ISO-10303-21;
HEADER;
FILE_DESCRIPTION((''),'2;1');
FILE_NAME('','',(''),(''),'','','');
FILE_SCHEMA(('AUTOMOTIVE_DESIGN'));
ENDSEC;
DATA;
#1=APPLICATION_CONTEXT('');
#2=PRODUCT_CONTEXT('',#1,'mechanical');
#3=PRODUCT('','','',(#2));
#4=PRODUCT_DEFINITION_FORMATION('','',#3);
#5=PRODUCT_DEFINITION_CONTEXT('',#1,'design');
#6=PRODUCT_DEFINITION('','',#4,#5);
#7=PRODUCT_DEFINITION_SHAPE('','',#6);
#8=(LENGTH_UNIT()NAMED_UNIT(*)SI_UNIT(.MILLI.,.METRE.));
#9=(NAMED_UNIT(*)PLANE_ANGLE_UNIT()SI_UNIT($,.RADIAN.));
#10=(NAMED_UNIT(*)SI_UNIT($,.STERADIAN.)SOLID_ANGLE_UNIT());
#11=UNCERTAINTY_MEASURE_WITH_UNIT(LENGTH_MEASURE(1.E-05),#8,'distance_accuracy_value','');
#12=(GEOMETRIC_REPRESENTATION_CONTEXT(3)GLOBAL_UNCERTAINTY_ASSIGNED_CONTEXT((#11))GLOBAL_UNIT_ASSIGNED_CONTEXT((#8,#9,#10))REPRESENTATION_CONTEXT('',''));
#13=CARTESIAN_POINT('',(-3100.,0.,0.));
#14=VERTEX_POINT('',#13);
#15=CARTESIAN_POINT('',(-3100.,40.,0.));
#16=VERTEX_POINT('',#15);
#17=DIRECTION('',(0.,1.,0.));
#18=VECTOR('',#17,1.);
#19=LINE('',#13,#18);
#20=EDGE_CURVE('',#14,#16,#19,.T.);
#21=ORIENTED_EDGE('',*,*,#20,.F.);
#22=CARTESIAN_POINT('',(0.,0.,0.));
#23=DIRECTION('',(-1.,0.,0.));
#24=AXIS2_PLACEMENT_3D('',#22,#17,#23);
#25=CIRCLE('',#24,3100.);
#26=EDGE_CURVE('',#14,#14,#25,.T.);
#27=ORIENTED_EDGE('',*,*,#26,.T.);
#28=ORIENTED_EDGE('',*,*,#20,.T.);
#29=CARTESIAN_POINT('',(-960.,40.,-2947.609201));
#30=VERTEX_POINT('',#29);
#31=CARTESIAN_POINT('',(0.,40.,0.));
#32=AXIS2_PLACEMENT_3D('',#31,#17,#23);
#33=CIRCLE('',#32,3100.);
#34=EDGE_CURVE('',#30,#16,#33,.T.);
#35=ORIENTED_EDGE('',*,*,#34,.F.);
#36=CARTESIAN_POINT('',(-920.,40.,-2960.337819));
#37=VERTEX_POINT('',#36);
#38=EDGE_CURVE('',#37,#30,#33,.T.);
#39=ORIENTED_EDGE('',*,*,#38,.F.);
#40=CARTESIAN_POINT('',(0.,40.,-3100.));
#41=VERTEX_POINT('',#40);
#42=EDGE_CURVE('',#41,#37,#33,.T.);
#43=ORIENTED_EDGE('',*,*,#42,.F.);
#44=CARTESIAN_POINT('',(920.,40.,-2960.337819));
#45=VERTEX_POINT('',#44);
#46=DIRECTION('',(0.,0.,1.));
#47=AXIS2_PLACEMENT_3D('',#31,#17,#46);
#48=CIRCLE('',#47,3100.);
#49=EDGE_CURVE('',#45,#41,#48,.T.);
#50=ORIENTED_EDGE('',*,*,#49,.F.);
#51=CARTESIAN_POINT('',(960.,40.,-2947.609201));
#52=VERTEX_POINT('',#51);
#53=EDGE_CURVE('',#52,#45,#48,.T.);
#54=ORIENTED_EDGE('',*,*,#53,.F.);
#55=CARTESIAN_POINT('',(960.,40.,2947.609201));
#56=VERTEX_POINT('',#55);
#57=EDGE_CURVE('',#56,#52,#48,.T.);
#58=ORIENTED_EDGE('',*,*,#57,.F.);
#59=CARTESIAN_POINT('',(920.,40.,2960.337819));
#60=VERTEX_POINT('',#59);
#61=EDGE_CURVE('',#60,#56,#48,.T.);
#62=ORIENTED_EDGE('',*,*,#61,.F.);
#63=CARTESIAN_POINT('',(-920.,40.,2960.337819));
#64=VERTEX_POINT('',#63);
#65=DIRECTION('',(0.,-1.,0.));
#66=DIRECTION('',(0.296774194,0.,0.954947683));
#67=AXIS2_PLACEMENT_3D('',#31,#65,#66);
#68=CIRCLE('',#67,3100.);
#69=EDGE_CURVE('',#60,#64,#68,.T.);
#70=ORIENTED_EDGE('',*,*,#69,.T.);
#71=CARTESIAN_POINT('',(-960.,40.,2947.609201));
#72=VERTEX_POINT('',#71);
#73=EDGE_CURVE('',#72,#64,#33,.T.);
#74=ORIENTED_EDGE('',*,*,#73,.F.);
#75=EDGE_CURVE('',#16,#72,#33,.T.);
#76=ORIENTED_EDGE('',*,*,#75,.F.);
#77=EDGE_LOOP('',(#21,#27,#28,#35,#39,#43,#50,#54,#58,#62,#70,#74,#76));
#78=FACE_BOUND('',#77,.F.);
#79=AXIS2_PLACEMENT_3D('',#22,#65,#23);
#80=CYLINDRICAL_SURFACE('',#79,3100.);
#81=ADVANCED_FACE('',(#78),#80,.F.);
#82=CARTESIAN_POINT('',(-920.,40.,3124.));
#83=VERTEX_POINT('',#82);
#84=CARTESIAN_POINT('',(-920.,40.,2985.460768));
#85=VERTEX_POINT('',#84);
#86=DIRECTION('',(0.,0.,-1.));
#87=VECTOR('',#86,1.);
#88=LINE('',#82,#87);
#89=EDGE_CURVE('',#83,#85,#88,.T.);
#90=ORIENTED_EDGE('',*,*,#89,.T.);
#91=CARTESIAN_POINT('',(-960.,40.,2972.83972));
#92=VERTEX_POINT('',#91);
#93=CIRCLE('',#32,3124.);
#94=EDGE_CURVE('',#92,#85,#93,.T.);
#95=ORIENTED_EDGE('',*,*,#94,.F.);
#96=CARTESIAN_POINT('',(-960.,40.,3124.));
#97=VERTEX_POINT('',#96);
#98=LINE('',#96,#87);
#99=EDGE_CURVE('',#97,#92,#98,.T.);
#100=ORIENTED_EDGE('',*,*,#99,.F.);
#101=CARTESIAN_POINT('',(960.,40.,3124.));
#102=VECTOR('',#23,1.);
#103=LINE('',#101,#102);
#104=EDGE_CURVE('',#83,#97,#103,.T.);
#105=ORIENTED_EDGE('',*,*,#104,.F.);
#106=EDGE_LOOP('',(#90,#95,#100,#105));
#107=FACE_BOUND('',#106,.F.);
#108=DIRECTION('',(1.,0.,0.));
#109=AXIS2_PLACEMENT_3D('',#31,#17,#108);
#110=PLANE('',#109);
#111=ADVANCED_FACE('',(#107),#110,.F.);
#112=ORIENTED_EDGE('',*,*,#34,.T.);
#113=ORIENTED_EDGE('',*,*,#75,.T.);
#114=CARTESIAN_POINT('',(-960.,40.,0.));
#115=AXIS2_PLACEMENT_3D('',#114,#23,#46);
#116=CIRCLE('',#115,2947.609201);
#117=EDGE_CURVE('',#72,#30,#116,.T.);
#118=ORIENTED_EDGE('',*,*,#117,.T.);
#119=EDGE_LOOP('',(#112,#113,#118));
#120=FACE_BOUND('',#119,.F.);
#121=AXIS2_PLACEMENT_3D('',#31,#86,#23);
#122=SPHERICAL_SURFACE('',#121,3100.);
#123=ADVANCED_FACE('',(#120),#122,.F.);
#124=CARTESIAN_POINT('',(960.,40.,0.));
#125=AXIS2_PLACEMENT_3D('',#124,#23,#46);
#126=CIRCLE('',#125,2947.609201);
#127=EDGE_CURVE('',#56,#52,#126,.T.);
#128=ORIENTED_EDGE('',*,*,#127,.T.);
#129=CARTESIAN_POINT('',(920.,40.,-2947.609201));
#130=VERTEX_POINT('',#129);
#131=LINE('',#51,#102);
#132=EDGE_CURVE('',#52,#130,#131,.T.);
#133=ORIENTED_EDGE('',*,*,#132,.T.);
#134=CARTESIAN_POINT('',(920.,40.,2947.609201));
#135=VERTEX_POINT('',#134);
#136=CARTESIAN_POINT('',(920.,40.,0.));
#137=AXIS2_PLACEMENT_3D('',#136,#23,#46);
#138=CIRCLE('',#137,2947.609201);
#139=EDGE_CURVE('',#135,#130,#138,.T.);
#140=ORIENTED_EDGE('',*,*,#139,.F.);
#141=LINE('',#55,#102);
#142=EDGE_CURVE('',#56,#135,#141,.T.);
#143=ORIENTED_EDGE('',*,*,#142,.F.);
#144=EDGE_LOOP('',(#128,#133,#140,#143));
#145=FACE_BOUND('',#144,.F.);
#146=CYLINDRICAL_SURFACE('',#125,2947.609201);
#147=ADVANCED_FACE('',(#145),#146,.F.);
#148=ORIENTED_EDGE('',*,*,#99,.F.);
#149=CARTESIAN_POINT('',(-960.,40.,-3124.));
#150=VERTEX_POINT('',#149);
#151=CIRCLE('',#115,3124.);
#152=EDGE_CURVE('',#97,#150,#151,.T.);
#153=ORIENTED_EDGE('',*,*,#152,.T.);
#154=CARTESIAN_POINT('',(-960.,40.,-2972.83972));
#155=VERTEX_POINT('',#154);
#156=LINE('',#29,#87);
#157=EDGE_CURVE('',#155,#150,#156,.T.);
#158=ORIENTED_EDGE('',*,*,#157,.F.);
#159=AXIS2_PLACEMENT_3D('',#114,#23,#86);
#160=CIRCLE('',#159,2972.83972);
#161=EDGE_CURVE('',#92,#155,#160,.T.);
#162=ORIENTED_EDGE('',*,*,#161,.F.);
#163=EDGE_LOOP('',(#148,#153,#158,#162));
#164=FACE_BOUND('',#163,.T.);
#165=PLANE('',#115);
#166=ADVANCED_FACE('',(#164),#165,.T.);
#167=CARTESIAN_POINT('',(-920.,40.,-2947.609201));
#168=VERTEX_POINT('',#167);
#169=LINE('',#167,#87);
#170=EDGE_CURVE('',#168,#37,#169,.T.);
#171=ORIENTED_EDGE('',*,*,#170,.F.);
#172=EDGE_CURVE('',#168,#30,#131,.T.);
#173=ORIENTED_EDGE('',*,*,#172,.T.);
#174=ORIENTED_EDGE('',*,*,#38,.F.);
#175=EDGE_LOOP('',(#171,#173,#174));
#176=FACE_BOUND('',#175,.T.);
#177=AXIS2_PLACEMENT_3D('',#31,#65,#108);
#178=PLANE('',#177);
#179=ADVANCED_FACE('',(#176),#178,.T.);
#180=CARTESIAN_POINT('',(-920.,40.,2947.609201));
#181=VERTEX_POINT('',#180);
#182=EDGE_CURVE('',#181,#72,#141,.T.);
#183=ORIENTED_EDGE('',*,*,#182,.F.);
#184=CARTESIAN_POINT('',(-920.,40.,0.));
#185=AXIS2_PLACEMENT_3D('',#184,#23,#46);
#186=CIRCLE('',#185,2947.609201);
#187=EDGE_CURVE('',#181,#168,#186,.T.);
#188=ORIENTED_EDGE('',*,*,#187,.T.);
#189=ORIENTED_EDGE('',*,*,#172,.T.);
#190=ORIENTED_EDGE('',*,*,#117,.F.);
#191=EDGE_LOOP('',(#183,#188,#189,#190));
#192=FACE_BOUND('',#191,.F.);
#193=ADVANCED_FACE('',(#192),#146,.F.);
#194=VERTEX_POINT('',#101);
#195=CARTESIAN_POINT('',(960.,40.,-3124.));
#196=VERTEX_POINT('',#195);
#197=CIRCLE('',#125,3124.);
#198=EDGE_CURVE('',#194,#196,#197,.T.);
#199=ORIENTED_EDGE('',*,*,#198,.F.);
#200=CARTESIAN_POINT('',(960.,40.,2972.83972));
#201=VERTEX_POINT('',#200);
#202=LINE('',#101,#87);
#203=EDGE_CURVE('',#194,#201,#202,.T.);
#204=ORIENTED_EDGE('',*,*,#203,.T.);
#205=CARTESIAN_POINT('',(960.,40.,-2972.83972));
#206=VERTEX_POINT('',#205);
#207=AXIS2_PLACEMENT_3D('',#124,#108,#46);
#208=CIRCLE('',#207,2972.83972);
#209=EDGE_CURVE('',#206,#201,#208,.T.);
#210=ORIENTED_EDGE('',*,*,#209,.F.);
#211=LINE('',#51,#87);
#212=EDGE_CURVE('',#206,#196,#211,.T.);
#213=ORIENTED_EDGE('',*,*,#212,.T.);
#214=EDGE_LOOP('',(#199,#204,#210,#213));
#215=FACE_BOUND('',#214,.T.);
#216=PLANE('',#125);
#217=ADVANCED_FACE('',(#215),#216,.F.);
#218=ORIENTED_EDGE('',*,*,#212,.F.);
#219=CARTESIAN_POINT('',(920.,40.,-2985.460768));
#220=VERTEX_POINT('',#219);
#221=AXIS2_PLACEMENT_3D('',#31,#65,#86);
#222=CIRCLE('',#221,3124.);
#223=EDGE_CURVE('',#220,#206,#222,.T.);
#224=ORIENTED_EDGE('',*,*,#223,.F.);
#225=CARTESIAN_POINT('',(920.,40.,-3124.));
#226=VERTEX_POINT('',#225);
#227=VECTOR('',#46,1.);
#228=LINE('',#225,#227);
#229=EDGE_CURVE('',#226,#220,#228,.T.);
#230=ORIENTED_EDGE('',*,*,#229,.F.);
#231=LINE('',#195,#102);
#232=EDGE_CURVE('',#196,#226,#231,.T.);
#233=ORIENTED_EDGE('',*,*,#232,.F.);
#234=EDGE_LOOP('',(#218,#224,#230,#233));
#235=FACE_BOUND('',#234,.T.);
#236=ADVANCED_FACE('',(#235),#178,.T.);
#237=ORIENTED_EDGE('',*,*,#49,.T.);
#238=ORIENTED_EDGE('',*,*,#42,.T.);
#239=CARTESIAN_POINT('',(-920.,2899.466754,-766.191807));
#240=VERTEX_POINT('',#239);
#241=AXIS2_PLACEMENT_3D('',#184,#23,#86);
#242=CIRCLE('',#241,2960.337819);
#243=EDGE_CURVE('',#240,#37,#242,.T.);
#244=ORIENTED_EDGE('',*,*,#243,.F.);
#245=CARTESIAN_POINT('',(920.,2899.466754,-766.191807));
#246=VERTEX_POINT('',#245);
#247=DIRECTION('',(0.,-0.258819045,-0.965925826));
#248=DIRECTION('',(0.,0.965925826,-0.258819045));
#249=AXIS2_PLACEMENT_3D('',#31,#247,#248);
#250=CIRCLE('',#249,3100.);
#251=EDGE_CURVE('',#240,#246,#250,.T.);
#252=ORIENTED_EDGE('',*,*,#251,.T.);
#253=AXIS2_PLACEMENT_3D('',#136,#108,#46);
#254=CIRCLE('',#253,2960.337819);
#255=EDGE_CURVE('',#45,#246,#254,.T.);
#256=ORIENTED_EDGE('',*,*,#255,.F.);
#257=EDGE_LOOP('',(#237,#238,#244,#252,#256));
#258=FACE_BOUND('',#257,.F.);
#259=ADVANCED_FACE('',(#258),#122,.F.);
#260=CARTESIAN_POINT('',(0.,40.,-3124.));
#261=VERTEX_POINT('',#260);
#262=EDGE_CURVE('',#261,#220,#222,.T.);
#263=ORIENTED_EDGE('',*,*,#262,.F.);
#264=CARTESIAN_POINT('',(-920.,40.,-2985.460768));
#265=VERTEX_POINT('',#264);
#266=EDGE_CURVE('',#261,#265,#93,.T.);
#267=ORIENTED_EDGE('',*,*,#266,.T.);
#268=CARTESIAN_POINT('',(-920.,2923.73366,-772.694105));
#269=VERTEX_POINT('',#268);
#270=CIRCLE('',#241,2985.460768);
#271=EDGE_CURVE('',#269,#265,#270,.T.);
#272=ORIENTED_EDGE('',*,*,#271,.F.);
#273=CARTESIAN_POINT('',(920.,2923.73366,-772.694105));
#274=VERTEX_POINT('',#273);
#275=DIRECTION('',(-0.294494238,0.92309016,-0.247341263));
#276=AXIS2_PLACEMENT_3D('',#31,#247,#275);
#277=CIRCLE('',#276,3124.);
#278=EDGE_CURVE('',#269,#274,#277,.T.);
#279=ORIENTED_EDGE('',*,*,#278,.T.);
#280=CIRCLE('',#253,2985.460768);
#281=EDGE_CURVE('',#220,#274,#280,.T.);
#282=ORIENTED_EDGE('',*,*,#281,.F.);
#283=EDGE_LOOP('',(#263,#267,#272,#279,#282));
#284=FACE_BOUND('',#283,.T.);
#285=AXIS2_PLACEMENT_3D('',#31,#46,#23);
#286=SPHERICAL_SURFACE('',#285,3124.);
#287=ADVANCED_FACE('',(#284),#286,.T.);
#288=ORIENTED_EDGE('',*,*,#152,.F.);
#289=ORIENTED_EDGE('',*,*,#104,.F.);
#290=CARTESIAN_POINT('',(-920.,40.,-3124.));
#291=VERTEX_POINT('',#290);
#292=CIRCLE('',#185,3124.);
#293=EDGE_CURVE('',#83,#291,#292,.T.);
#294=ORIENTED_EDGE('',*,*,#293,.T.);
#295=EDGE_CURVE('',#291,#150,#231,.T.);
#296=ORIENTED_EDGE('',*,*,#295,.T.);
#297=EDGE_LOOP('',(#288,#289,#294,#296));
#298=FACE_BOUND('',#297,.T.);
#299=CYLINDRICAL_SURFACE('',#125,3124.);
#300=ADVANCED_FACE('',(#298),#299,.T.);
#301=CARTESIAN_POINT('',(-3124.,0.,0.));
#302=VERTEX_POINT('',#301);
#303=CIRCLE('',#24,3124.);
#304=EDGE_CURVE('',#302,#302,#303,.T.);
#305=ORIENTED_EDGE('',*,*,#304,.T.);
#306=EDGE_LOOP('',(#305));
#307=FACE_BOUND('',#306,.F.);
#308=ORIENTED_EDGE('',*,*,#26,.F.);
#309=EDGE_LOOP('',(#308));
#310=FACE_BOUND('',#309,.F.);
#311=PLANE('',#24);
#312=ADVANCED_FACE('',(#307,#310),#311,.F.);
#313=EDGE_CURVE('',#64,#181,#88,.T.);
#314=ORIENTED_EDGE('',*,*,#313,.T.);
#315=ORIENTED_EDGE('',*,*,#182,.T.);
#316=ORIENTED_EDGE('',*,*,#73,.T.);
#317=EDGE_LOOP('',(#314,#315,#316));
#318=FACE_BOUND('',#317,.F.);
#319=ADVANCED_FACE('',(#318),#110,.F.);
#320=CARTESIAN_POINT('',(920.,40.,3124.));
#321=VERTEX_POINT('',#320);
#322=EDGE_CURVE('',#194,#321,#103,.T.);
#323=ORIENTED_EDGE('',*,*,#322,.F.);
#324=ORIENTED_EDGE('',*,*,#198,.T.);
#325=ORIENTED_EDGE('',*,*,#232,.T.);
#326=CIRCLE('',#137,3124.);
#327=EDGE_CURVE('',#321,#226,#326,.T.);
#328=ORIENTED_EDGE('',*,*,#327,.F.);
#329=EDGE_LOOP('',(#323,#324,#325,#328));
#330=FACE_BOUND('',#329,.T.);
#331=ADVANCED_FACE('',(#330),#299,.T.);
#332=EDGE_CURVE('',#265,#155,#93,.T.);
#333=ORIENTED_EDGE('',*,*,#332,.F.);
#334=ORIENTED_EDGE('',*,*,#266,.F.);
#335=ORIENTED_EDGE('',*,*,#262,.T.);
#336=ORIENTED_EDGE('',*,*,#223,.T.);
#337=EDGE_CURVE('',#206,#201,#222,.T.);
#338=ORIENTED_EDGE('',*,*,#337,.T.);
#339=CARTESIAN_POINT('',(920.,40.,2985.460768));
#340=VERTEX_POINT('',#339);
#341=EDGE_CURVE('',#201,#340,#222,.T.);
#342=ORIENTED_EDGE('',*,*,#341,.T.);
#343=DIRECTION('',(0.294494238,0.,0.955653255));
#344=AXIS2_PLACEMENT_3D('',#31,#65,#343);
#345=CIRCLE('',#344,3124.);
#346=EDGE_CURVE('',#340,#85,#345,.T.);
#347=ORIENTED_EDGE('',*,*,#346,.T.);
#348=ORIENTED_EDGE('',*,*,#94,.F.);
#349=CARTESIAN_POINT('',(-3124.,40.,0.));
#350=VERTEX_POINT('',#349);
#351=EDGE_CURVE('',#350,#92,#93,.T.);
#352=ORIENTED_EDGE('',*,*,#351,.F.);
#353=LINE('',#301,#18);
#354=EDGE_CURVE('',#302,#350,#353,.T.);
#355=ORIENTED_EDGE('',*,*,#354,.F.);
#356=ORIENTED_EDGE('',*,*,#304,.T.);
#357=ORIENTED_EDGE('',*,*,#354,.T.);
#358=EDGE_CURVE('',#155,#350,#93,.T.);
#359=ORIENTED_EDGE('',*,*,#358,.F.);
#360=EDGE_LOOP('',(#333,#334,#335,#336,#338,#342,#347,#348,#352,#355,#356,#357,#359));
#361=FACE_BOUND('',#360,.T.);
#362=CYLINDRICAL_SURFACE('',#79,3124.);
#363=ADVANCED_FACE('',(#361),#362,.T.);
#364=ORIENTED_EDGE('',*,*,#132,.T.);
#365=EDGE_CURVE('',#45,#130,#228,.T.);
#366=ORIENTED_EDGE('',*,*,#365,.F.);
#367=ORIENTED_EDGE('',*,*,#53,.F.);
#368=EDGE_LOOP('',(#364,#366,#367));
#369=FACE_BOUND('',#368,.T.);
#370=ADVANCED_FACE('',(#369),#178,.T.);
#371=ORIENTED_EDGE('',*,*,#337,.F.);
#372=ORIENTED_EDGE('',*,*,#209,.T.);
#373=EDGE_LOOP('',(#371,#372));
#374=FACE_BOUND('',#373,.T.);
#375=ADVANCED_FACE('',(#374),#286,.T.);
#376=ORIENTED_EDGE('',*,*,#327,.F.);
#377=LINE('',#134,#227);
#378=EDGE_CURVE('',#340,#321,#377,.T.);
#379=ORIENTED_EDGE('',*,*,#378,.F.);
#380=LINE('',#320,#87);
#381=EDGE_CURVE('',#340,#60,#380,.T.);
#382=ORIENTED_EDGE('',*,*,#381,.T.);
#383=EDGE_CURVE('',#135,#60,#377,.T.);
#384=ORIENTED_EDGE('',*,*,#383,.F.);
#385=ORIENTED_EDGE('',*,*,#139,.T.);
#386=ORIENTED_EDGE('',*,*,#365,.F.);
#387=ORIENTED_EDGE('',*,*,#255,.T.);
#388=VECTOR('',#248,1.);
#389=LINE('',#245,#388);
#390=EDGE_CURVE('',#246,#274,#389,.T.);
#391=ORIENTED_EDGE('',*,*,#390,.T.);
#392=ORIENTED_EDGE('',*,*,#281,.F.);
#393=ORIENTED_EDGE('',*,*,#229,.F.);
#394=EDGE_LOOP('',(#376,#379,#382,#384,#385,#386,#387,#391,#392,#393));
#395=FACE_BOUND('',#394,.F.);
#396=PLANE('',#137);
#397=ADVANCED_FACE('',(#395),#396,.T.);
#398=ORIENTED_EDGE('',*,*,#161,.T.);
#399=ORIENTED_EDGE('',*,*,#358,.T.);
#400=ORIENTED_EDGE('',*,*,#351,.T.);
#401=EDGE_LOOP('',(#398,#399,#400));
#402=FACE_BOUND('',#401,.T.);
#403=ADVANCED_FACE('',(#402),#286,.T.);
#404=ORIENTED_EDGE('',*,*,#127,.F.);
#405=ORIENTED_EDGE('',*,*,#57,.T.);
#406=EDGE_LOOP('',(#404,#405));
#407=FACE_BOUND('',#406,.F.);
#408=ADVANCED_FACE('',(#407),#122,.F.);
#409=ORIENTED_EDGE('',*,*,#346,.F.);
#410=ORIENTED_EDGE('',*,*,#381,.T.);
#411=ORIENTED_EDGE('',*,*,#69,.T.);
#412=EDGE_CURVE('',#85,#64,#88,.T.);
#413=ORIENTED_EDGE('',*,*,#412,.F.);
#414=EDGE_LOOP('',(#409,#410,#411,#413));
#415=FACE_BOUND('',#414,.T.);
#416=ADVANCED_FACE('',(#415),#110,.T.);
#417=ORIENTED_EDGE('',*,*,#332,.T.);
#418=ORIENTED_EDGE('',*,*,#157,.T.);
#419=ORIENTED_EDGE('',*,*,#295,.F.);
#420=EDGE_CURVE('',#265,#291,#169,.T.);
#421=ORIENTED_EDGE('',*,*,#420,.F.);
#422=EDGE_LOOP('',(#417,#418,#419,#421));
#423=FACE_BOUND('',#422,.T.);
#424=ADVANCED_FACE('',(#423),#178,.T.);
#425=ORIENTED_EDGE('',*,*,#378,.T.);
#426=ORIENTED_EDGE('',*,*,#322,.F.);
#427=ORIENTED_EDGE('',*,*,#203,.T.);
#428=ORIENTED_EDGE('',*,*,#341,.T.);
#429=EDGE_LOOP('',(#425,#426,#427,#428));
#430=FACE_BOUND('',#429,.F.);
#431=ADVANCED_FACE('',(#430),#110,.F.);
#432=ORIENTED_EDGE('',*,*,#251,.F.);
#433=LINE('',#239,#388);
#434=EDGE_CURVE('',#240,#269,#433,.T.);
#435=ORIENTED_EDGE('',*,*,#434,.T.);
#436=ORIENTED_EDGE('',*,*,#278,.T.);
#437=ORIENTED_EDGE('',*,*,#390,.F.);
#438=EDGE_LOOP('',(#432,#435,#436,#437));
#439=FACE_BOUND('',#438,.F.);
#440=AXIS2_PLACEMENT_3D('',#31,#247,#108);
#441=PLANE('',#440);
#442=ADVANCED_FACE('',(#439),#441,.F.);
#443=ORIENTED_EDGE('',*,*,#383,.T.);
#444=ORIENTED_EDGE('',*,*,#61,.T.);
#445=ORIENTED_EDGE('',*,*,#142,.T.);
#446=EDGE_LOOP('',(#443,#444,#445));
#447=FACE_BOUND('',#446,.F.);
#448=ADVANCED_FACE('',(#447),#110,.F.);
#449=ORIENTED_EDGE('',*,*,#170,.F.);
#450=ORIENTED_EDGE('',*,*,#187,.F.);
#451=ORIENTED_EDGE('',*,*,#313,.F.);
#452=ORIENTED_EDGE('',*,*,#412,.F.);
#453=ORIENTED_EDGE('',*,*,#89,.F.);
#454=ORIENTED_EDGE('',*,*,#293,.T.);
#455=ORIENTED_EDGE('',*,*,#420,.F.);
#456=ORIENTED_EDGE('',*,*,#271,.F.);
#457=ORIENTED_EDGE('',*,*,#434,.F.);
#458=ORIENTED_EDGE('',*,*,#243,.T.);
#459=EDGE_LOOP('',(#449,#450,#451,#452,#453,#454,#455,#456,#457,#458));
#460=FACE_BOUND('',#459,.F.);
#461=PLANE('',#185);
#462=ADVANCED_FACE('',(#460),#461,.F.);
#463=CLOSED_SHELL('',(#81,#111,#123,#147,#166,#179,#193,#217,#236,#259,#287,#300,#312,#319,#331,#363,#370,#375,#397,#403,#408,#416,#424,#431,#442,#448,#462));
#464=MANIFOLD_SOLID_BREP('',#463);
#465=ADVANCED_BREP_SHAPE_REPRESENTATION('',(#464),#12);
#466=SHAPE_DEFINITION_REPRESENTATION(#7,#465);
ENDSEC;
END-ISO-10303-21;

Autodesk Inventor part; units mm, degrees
ref_plane "YZ Plane" through (0, 0, 0) normal (1, 0, 0) x (0, 1, 0)
ref_plane "XZ Plane" through (0, 0, 0) normal (0, 1, 0) x (-1, 0, 0)
sketch "Sketch6" plane through (0, 0, 0) normal (0, 1, 0) x (-1, 0, 0)
  circle A0 centre (0, 0) radius 3124
  circle A1 centre (0, 0) radius 3100
extrude "Extrusion2" add sketch "Sketch6" along normal blind 40
ref_plane "Work Plane3" through (0, 40, 0) normal (0, 1, 0) x (1, 0, 0)
sketch "Sketch7" plane through (0, 40, 0) normal (0, 1, 0) x (1, 0, 0)
  line L0 (0, 3381) -> (0, -3319)
  line L1 (-3301, 0) -> (3261, 0)
  circle A0 centre (0, 0) radius 3100
  circle A1 centre (0, 0) radius 3124
  line L2 (920, -3124) -> (-920, -3124)
  line L3 (-920, -3124) -> (-920, 3124)
  line L4 (-920, 3124) -> (920, 3124)
  line L5 (920, 3124) -> (920, -3124)
  line L6 (920, -3124) -> (-920, 3124) construction
  line L7 (-920, -3124) -> (920, 3124) construction
  circle A2 centre (0, 0) radius 3100
  line L8 (-920, 2960.337819) -> (920, 2960.337819)
  line L9 (-920, -2960.337819) -> (920, -2960.337819)
  line L10 (960, -3124) -> (-960, -3124)
  line L11 (-960, -3124) -> (-960, 3124)
  line L12 (-960, 3124) -> (960, 3124)
  line L13 (960, 3124) -> (960, -3124)
  line L14 (960, -3124) -> (-960, 3124) construction
  line L15 (-960, -3124) -> (960, 3124) construction
  line L16 (960, -2947.609201) -> (-960, -2947.609201)
  point P0 (0, -3124)
  point P1 (0, -3100)
  point P2 (0, 3100)
  point P3 (0, 3124)
  point P4 (920, -2947.609201)
  point P5 (-920, -2947.609201)
  dimension "d12" = 1840
sketch "Sketch7 outline for Revolution4" plane through (0, 40, 0) normal (0, 1, 0) x (1, 0, 0)
  arc A0 (0, 3124) -> (0, -3124) centre (0, 0) ccw
  line L0 (0, 3100) -> (0, 3124)
  arc A1 (0, -3100) -> (0, 3100) centre (0, 0) cw
  line L1 (0, -3124) -> (0, -3100)
revolve "Revolution4" add sketch "Sketch7 outline for Revolution4" angle 180 about axis through (0, 40, -3381) along (0, 0, -1)
revolve "Revolution5" cut sketch "Sketch7" angle 105 about axis through (-3301, 40, 0) along (-1, 0, 0) picked at (895.128493, -2976.100487) picked at (-895.128493, -2976.100487) contours L9 A0 L0 | L0 A0 L9 | L5 A1 L0 A0 | A0 L0 A1 L3 | L5 L2 A1 | A1 L2 L3
revolve "Revolution6" add sketch "Sketch7" angle 180 about axis through (-3301, 40, 0) along (-1, 0, 0) picked at (928.901519, -2965.935467) picked at (-928.901519, -2965.935467) contours L16 A0 L5 | L3 A0 L16 | L13 L10 L5 A1 | A1 L5 A0 L13 | L11 A0 L3 A1 | A1 L3 L10 L11
properties part number "DomeHemisphere"
